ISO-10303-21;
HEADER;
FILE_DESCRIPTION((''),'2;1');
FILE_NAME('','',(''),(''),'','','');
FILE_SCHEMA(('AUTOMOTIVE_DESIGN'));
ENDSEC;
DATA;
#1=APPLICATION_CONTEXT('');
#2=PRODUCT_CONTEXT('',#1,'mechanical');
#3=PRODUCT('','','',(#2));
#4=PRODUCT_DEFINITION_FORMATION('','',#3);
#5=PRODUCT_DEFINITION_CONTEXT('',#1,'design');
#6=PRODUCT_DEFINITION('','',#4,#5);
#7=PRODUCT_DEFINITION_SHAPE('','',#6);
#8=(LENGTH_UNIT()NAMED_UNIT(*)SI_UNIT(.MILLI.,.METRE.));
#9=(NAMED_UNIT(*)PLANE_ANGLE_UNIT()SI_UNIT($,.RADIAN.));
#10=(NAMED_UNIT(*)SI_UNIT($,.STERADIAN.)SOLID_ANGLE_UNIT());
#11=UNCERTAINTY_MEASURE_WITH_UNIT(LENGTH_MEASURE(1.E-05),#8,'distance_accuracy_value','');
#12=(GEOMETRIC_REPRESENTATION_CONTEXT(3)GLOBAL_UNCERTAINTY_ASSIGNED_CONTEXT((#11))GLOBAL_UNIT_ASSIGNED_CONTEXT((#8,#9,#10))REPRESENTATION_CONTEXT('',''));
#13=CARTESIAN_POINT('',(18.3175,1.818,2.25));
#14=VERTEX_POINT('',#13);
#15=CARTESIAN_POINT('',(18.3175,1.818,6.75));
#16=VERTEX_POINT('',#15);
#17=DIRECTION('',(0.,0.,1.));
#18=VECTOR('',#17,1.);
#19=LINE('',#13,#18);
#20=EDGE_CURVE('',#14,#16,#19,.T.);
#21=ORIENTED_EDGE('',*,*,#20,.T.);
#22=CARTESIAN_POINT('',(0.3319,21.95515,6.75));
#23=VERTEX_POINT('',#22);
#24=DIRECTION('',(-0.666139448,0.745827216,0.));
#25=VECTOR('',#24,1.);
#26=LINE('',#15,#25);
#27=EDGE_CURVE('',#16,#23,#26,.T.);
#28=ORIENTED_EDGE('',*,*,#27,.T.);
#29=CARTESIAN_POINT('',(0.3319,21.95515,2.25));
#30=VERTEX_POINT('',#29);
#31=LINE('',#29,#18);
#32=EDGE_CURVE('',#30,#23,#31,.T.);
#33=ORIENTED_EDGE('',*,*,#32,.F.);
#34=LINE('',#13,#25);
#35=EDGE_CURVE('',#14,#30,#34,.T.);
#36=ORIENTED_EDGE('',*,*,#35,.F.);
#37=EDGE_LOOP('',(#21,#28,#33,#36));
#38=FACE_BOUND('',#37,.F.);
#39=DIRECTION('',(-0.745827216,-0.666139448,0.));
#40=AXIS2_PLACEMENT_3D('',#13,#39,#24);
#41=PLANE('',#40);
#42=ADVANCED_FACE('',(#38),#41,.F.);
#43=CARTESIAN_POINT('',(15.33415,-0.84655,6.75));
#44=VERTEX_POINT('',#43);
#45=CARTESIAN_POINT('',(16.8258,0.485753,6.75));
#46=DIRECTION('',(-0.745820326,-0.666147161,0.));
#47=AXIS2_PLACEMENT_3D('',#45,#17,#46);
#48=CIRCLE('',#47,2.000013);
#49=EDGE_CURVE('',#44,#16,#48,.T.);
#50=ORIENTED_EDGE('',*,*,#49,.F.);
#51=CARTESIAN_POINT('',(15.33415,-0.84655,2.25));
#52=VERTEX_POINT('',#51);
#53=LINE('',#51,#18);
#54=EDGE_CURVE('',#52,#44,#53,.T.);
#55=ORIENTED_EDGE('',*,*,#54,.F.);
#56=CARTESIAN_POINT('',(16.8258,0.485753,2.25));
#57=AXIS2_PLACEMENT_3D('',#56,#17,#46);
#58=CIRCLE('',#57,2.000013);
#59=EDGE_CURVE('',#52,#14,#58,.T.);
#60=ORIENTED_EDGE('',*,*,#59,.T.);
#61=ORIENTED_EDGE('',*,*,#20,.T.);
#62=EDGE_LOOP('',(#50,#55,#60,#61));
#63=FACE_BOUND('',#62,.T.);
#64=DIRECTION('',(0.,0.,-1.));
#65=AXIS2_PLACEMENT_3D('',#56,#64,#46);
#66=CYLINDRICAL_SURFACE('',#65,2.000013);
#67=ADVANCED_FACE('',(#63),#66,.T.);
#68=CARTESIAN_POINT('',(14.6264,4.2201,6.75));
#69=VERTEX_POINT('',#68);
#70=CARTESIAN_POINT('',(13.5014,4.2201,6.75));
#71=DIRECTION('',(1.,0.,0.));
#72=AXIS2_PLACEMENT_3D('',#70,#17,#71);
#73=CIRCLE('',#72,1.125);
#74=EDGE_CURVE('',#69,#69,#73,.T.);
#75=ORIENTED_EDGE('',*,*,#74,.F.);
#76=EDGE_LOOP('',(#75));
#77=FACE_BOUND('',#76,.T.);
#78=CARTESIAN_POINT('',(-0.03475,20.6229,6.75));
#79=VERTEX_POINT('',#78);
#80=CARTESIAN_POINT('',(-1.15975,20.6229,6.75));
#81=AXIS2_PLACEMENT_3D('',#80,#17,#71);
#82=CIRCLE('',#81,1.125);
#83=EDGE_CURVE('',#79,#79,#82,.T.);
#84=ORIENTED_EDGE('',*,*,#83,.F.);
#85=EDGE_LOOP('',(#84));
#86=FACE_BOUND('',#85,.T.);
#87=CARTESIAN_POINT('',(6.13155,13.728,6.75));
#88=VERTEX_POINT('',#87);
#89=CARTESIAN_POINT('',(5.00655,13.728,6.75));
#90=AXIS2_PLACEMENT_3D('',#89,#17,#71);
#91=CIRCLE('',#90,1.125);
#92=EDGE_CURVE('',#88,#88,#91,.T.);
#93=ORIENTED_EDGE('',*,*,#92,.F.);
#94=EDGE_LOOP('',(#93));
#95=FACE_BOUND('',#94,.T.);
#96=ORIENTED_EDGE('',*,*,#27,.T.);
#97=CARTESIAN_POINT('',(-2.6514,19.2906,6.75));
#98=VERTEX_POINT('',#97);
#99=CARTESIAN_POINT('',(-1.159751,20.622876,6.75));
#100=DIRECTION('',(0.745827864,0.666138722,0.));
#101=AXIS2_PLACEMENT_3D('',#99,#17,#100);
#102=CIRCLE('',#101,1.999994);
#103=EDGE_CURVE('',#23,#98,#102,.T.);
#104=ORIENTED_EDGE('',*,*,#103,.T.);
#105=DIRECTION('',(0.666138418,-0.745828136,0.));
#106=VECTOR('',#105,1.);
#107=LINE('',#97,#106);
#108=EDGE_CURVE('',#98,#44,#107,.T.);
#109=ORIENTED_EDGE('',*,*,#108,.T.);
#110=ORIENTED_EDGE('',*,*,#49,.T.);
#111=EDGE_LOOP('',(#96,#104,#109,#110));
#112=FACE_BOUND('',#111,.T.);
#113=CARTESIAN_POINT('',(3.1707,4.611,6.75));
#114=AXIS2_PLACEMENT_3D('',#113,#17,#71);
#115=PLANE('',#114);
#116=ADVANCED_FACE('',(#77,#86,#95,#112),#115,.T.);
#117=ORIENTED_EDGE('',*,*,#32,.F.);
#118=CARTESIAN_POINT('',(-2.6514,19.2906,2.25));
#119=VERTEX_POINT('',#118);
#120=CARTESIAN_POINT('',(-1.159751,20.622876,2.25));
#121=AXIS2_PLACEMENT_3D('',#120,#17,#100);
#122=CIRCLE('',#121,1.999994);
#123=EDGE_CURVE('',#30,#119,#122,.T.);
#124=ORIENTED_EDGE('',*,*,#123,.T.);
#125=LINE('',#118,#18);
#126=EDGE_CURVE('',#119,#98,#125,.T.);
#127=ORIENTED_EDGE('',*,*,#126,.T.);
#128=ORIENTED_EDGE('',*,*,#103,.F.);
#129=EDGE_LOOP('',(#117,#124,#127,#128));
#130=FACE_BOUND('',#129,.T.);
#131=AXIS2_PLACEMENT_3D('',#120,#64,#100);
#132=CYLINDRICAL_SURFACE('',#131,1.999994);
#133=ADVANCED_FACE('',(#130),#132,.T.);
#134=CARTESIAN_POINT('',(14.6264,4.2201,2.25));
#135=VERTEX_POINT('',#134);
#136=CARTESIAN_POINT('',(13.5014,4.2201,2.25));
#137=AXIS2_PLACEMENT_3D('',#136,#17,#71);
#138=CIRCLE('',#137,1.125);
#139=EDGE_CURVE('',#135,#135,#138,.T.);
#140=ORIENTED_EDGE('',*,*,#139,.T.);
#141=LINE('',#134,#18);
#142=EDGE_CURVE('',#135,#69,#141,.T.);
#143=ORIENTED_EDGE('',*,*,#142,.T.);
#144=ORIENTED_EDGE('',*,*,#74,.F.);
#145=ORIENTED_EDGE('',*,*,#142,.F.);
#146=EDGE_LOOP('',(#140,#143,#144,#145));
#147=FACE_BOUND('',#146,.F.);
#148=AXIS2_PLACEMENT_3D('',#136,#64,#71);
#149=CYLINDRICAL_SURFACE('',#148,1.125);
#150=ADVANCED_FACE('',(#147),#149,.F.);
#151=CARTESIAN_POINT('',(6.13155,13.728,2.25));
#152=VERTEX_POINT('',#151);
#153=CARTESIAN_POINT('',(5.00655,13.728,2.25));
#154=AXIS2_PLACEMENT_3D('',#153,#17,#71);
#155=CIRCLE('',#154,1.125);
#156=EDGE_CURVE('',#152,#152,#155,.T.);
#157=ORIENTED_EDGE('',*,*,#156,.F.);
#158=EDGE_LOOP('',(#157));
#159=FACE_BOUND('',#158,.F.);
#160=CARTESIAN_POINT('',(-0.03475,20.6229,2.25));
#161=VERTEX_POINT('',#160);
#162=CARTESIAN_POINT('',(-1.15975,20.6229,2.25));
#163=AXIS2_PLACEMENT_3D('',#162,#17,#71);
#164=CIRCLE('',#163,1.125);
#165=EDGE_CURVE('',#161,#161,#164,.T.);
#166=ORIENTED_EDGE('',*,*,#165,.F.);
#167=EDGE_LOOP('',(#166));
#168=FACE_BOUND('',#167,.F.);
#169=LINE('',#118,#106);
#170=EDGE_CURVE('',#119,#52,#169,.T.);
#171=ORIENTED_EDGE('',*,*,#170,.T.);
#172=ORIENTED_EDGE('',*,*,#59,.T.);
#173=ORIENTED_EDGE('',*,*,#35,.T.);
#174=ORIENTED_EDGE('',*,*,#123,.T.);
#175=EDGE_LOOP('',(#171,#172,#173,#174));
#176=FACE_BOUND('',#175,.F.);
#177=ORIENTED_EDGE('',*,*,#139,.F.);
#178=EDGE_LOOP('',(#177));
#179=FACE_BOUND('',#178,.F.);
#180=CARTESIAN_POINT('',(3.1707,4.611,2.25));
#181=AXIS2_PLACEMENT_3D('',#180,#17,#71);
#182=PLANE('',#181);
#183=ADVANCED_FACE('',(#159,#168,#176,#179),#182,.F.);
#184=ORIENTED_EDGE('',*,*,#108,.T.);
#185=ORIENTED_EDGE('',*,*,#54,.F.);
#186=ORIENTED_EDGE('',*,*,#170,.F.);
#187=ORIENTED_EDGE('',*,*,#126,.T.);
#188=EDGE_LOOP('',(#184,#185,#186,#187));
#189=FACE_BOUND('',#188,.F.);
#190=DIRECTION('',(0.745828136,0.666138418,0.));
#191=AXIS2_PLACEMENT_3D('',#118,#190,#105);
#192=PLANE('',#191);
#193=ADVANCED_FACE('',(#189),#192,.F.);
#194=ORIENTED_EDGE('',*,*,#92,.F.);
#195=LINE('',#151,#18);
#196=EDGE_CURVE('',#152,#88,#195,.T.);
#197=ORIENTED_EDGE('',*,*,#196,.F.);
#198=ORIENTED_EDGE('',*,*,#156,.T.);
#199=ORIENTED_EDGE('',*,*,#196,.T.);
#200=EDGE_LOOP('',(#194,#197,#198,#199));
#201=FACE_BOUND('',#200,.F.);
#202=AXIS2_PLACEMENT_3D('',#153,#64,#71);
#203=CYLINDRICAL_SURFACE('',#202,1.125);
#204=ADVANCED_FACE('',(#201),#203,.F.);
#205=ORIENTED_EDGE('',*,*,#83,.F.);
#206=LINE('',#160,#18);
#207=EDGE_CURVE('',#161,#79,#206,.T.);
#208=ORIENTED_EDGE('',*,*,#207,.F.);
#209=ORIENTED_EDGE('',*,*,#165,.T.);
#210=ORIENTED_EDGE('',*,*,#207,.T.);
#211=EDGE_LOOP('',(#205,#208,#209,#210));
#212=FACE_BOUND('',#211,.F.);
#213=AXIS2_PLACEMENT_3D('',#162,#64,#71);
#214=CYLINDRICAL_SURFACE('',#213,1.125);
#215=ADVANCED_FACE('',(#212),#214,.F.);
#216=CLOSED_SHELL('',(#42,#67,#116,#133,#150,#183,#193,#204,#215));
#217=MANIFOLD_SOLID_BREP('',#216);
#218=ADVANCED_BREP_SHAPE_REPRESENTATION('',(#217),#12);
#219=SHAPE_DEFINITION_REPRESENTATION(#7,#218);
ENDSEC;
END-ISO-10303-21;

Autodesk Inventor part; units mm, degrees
ref_plane "YZ Plane" through (0, 0, 0) normal (1, 0, 0) x (0, 1, 0)
ref_plane "XZ Plane" through (0, 0, 0) normal (0, 1, 0) x (-1, 0, 0)
ref_plane "XY Plane" through (0, 0, 0) normal (0, 0, 1) x (1, 0, 0)
sketch "Sketch1" plane through (0, 0, 0) normal (0, 0, 1) x (1, 0, 0)
  circle A0 centre (20.6614, -0.7818) radius 2.25 projected
  circle A1 centre (3.6717, 18.234) radius 2.25 projected
  circle A2 centre (-8.6609, 32.0238) radius 2.25 projected
  arc A3 (24.8863, -10.4155) -> (29.7342, -6.0856) centre (27.3102, -8.2505) ccw projected
  line L0 (27.3102, -8.2505) -> (-8.6609, 32.0238) construction
  line L1 (30.2936, -5.586) -> (-5.6776, 34.6883)
  line L2 (-11.6442, 29.3592) -> (24.3269, -10.9151)
  arc A4 (24.3269, -10.9151) -> (30.2936, -5.586) centre (27.3102, -8.2505) ccw
  arc A5 (-5.6776, 34.6883) -> (-11.6442, 29.3592) centre (-8.6609, 32.0238) ccw
  point P0 (0, 0)
  point P1 (9.3247, 11.8866)
  dimension "d0" = 8
extrude "Extrusion1" add sketch "Sketch1" along normal blind 9
scale "Scale1" factors (0.5, 0.5, 0.5) then translate (3.1707, 4.611, 2.25) bodies 1
properties part number "MassiveBone3"
